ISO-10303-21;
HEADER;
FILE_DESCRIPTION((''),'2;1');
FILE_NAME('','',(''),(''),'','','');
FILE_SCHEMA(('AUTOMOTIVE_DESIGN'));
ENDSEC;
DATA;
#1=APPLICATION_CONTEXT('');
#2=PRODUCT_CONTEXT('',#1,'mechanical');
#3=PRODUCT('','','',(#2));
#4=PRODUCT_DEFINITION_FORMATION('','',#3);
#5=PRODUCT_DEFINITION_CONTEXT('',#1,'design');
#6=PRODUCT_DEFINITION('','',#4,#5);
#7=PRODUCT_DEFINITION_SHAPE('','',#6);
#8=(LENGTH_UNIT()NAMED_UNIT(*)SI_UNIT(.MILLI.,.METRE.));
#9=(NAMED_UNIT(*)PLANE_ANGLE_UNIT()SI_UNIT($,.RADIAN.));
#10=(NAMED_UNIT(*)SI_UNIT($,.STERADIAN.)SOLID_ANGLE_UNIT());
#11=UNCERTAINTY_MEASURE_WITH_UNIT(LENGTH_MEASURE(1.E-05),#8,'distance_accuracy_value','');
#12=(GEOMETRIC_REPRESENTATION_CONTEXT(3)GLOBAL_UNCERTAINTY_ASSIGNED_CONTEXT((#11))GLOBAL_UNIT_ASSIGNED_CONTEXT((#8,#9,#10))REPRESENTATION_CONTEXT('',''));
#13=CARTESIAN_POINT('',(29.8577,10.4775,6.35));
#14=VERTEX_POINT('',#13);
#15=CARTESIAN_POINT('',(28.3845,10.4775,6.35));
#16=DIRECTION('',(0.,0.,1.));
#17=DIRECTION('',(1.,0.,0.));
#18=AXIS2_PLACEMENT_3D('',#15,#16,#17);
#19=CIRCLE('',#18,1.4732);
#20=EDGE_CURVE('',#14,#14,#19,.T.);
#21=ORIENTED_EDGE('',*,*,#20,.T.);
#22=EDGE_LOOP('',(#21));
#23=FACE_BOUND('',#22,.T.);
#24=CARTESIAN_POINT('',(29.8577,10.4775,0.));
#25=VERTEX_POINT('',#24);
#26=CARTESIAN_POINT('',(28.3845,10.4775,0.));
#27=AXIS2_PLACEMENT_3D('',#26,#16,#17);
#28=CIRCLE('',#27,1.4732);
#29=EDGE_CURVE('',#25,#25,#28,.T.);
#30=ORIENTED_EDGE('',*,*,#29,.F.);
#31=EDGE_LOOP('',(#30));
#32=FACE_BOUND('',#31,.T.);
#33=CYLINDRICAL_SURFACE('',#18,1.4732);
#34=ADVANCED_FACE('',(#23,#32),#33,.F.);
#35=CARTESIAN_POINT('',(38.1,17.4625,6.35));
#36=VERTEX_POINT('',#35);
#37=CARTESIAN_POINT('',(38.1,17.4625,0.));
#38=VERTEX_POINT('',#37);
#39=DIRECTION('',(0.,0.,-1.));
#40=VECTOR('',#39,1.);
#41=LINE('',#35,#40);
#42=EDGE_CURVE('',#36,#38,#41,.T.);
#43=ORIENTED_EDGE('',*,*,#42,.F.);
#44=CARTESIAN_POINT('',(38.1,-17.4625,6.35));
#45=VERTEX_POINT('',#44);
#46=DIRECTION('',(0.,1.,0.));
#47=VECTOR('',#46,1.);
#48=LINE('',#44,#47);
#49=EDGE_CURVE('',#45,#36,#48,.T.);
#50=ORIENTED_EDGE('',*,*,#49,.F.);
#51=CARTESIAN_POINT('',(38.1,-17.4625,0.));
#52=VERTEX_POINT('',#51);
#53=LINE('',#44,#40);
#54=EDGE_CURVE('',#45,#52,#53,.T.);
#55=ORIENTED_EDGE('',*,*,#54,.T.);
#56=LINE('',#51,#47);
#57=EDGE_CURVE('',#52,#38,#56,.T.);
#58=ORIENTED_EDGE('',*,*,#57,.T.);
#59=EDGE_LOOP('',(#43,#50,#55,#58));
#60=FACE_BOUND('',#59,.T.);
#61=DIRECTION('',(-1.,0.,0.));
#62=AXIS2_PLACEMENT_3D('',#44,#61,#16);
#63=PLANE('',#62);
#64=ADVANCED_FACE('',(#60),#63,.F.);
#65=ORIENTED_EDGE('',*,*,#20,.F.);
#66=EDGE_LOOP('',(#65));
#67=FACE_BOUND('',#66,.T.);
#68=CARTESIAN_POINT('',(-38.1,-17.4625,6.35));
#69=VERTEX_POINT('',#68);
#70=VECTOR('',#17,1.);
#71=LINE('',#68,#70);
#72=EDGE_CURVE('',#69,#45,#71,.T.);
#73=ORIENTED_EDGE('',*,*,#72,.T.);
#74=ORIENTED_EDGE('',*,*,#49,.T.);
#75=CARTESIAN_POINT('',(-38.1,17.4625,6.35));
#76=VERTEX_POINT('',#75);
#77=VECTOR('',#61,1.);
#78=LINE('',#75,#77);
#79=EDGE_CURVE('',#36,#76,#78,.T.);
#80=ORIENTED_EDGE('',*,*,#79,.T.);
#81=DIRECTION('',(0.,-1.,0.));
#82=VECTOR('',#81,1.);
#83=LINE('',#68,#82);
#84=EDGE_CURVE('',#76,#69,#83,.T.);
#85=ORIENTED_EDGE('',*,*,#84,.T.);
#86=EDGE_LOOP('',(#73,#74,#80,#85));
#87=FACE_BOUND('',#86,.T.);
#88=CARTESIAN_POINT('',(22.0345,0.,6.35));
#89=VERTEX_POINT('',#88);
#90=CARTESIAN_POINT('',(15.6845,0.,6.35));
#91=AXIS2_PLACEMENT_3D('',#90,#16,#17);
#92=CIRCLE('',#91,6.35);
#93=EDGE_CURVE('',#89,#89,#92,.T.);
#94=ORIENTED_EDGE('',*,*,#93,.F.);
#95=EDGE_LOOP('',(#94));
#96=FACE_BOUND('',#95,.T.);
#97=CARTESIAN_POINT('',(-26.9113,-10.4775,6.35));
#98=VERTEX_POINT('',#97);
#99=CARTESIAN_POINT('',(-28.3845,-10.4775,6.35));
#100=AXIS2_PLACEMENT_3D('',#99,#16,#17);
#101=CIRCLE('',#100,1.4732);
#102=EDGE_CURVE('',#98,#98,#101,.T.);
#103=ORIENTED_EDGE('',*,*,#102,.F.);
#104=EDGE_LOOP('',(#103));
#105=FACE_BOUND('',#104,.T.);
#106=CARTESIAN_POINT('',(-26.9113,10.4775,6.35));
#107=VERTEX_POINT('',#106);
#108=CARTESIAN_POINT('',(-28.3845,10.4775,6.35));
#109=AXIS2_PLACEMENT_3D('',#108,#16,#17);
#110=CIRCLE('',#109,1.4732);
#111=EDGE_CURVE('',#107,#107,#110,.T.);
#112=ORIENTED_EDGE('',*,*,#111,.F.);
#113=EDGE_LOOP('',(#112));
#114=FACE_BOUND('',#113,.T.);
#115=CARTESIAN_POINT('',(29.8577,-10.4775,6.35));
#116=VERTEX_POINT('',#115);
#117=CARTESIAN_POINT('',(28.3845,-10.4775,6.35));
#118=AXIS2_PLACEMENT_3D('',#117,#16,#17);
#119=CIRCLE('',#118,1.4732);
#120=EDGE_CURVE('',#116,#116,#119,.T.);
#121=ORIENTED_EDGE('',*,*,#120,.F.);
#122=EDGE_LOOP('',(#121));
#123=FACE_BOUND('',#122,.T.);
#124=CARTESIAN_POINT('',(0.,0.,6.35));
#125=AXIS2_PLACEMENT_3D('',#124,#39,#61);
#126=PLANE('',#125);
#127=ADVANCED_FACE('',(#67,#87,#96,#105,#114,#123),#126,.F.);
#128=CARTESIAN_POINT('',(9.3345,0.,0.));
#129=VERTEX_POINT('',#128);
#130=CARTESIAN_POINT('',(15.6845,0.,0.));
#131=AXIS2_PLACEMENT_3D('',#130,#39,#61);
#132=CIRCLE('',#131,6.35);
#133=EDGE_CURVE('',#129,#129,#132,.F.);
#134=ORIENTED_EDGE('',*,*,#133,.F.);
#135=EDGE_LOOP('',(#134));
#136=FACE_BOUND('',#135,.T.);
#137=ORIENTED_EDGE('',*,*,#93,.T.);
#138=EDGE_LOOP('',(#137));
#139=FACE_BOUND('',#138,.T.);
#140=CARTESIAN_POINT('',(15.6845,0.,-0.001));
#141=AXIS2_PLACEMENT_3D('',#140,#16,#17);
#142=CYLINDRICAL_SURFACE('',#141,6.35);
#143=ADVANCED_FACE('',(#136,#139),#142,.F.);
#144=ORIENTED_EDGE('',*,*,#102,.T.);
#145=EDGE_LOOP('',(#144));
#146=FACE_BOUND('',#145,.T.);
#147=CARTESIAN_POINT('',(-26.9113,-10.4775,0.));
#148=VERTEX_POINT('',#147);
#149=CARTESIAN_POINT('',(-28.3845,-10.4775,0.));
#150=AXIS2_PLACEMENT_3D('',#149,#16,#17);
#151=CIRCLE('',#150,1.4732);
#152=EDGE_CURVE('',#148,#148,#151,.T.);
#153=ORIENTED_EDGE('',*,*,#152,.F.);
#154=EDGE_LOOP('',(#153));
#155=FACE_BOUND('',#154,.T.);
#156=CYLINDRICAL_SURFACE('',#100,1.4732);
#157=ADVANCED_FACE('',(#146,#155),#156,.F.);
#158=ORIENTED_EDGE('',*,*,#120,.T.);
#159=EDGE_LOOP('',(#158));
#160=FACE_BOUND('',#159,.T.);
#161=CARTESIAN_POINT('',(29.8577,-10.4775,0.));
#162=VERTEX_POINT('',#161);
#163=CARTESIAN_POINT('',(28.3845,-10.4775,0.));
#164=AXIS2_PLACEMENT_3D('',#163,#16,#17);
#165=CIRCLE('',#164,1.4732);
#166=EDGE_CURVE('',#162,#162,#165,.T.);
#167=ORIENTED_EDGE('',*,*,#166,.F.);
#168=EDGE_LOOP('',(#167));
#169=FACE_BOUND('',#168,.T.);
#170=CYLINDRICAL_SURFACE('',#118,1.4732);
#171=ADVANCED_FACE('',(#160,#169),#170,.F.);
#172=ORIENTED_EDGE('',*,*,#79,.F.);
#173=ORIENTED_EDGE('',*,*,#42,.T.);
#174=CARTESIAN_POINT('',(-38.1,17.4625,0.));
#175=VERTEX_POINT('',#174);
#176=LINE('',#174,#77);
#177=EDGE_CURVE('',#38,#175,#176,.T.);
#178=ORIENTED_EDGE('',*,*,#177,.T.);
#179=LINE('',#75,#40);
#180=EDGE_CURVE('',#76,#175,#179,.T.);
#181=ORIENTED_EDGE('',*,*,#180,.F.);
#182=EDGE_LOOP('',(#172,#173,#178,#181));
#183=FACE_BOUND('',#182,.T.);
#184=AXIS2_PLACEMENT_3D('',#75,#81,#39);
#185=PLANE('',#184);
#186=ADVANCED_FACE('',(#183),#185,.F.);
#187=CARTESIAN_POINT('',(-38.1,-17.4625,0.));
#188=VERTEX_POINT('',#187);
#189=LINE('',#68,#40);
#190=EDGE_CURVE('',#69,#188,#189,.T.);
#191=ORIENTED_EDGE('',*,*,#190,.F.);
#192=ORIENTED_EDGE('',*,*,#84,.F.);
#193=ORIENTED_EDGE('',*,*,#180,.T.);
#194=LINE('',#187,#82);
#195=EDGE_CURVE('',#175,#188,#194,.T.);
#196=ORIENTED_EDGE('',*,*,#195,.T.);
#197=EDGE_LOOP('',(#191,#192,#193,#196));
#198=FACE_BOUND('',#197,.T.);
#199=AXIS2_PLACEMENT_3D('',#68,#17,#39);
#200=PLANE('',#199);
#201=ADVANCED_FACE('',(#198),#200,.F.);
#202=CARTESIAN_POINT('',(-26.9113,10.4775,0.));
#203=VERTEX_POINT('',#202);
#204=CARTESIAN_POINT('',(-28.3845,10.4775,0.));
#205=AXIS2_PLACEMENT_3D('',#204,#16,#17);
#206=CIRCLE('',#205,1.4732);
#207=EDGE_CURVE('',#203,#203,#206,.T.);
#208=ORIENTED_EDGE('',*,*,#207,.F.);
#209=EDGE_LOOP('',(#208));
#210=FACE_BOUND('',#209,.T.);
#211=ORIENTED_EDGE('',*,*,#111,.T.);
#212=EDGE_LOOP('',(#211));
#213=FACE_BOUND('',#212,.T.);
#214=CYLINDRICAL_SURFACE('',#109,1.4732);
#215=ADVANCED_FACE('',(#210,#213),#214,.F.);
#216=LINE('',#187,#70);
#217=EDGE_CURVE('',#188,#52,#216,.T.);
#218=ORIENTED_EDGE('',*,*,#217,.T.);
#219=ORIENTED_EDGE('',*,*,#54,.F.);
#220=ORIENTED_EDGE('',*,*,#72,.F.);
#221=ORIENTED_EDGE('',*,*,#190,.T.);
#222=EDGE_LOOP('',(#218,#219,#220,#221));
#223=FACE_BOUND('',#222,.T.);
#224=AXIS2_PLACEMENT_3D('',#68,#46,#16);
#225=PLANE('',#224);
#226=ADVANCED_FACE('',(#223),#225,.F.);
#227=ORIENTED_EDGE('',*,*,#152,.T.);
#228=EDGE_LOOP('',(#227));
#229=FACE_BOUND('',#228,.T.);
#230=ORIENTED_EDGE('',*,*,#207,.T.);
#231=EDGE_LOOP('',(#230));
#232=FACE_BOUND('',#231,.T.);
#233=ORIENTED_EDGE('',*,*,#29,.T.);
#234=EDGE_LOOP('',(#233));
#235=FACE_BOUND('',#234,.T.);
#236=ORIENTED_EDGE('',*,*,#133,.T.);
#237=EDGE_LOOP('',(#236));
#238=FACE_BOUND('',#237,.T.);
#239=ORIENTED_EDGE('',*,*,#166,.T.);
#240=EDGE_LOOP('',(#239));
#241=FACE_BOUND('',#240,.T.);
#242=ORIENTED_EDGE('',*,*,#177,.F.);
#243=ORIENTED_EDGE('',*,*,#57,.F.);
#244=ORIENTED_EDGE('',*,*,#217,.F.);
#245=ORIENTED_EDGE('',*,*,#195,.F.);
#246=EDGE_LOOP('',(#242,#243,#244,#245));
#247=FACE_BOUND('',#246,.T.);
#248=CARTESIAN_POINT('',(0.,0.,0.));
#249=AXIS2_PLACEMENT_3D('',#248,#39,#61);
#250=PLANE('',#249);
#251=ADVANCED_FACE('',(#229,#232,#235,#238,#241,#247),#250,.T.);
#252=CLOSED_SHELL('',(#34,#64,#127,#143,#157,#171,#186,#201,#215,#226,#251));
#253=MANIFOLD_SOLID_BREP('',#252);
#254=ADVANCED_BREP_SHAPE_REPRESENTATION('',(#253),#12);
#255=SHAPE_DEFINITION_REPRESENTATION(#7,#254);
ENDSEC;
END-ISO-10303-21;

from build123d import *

# Parameters (mm, degrees)
SKETCH1_W               = 76.2
SKETCH1_H               = 34.925
BOSS_EXTRUDE1_DEPTH     = 6.35
ADVANCEDHOLE1_OUTLINE_R = 1.4732
ADVANCEDHOLE1_DEPTH     = 6.35
CUT_EXTRUDE1_REACH      = 44.39
SKETCH5_R               = 6.35


# Read off the part's stored shape, not the designer's step: AdvancedHole1
with BuildPart() as part:
    # Sketch1 → Boss-Extrude1 (new body)
    with BuildSketch(Plane.XY):
        Rectangle(SKETCH1_W, SKETCH1_H)
    extrude(amount=BOSS_EXTRUDE1_DEPTH)

    # AdvancedHole1 outline → AdvancedHole1 (cut)
    with BuildSketch(Plane.XY):
        with Locations((28.3845, 10.4775)):
            Circle(ADVANCEDHOLE1_OUTLINE_R)
        with Locations((28.3845, -10.4775)):
            Circle(ADVANCEDHOLE1_OUTLINE_R)
        with Locations((-28.3845, -10.4775)):
            Circle(ADVANCEDHOLE1_OUTLINE_R)
        with Locations((-28.3845, 10.4775)):
            Circle(ADVANCEDHOLE1_OUTLINE_R)
    extrude(amount=ADVANCEDHOLE1_DEPTH, mode=Mode.SUBTRACT)

    # Sketch5 → Cut-Extrude1 (cut, up to next)
    with BuildSketch(Plane.XY.offset(6.35), mode=Mode.PRIVATE) as cut_extrude1_sk1:
        with Locations((15.6845, 0)):
            Circle(SKETCH5_R)
    cut_extrude1_tool1 = extrude(cut_extrude1_sk1.sketch, amount=-CUT_EXTRUDE1_REACH, mode=Mode.PRIVATE) & part.part
    add(cut_extrude1_tool1.solids().sort_by_distance((15.6845, 0, 6.35))[0], mode=Mode.SUBTRACT)


solid = part.part
